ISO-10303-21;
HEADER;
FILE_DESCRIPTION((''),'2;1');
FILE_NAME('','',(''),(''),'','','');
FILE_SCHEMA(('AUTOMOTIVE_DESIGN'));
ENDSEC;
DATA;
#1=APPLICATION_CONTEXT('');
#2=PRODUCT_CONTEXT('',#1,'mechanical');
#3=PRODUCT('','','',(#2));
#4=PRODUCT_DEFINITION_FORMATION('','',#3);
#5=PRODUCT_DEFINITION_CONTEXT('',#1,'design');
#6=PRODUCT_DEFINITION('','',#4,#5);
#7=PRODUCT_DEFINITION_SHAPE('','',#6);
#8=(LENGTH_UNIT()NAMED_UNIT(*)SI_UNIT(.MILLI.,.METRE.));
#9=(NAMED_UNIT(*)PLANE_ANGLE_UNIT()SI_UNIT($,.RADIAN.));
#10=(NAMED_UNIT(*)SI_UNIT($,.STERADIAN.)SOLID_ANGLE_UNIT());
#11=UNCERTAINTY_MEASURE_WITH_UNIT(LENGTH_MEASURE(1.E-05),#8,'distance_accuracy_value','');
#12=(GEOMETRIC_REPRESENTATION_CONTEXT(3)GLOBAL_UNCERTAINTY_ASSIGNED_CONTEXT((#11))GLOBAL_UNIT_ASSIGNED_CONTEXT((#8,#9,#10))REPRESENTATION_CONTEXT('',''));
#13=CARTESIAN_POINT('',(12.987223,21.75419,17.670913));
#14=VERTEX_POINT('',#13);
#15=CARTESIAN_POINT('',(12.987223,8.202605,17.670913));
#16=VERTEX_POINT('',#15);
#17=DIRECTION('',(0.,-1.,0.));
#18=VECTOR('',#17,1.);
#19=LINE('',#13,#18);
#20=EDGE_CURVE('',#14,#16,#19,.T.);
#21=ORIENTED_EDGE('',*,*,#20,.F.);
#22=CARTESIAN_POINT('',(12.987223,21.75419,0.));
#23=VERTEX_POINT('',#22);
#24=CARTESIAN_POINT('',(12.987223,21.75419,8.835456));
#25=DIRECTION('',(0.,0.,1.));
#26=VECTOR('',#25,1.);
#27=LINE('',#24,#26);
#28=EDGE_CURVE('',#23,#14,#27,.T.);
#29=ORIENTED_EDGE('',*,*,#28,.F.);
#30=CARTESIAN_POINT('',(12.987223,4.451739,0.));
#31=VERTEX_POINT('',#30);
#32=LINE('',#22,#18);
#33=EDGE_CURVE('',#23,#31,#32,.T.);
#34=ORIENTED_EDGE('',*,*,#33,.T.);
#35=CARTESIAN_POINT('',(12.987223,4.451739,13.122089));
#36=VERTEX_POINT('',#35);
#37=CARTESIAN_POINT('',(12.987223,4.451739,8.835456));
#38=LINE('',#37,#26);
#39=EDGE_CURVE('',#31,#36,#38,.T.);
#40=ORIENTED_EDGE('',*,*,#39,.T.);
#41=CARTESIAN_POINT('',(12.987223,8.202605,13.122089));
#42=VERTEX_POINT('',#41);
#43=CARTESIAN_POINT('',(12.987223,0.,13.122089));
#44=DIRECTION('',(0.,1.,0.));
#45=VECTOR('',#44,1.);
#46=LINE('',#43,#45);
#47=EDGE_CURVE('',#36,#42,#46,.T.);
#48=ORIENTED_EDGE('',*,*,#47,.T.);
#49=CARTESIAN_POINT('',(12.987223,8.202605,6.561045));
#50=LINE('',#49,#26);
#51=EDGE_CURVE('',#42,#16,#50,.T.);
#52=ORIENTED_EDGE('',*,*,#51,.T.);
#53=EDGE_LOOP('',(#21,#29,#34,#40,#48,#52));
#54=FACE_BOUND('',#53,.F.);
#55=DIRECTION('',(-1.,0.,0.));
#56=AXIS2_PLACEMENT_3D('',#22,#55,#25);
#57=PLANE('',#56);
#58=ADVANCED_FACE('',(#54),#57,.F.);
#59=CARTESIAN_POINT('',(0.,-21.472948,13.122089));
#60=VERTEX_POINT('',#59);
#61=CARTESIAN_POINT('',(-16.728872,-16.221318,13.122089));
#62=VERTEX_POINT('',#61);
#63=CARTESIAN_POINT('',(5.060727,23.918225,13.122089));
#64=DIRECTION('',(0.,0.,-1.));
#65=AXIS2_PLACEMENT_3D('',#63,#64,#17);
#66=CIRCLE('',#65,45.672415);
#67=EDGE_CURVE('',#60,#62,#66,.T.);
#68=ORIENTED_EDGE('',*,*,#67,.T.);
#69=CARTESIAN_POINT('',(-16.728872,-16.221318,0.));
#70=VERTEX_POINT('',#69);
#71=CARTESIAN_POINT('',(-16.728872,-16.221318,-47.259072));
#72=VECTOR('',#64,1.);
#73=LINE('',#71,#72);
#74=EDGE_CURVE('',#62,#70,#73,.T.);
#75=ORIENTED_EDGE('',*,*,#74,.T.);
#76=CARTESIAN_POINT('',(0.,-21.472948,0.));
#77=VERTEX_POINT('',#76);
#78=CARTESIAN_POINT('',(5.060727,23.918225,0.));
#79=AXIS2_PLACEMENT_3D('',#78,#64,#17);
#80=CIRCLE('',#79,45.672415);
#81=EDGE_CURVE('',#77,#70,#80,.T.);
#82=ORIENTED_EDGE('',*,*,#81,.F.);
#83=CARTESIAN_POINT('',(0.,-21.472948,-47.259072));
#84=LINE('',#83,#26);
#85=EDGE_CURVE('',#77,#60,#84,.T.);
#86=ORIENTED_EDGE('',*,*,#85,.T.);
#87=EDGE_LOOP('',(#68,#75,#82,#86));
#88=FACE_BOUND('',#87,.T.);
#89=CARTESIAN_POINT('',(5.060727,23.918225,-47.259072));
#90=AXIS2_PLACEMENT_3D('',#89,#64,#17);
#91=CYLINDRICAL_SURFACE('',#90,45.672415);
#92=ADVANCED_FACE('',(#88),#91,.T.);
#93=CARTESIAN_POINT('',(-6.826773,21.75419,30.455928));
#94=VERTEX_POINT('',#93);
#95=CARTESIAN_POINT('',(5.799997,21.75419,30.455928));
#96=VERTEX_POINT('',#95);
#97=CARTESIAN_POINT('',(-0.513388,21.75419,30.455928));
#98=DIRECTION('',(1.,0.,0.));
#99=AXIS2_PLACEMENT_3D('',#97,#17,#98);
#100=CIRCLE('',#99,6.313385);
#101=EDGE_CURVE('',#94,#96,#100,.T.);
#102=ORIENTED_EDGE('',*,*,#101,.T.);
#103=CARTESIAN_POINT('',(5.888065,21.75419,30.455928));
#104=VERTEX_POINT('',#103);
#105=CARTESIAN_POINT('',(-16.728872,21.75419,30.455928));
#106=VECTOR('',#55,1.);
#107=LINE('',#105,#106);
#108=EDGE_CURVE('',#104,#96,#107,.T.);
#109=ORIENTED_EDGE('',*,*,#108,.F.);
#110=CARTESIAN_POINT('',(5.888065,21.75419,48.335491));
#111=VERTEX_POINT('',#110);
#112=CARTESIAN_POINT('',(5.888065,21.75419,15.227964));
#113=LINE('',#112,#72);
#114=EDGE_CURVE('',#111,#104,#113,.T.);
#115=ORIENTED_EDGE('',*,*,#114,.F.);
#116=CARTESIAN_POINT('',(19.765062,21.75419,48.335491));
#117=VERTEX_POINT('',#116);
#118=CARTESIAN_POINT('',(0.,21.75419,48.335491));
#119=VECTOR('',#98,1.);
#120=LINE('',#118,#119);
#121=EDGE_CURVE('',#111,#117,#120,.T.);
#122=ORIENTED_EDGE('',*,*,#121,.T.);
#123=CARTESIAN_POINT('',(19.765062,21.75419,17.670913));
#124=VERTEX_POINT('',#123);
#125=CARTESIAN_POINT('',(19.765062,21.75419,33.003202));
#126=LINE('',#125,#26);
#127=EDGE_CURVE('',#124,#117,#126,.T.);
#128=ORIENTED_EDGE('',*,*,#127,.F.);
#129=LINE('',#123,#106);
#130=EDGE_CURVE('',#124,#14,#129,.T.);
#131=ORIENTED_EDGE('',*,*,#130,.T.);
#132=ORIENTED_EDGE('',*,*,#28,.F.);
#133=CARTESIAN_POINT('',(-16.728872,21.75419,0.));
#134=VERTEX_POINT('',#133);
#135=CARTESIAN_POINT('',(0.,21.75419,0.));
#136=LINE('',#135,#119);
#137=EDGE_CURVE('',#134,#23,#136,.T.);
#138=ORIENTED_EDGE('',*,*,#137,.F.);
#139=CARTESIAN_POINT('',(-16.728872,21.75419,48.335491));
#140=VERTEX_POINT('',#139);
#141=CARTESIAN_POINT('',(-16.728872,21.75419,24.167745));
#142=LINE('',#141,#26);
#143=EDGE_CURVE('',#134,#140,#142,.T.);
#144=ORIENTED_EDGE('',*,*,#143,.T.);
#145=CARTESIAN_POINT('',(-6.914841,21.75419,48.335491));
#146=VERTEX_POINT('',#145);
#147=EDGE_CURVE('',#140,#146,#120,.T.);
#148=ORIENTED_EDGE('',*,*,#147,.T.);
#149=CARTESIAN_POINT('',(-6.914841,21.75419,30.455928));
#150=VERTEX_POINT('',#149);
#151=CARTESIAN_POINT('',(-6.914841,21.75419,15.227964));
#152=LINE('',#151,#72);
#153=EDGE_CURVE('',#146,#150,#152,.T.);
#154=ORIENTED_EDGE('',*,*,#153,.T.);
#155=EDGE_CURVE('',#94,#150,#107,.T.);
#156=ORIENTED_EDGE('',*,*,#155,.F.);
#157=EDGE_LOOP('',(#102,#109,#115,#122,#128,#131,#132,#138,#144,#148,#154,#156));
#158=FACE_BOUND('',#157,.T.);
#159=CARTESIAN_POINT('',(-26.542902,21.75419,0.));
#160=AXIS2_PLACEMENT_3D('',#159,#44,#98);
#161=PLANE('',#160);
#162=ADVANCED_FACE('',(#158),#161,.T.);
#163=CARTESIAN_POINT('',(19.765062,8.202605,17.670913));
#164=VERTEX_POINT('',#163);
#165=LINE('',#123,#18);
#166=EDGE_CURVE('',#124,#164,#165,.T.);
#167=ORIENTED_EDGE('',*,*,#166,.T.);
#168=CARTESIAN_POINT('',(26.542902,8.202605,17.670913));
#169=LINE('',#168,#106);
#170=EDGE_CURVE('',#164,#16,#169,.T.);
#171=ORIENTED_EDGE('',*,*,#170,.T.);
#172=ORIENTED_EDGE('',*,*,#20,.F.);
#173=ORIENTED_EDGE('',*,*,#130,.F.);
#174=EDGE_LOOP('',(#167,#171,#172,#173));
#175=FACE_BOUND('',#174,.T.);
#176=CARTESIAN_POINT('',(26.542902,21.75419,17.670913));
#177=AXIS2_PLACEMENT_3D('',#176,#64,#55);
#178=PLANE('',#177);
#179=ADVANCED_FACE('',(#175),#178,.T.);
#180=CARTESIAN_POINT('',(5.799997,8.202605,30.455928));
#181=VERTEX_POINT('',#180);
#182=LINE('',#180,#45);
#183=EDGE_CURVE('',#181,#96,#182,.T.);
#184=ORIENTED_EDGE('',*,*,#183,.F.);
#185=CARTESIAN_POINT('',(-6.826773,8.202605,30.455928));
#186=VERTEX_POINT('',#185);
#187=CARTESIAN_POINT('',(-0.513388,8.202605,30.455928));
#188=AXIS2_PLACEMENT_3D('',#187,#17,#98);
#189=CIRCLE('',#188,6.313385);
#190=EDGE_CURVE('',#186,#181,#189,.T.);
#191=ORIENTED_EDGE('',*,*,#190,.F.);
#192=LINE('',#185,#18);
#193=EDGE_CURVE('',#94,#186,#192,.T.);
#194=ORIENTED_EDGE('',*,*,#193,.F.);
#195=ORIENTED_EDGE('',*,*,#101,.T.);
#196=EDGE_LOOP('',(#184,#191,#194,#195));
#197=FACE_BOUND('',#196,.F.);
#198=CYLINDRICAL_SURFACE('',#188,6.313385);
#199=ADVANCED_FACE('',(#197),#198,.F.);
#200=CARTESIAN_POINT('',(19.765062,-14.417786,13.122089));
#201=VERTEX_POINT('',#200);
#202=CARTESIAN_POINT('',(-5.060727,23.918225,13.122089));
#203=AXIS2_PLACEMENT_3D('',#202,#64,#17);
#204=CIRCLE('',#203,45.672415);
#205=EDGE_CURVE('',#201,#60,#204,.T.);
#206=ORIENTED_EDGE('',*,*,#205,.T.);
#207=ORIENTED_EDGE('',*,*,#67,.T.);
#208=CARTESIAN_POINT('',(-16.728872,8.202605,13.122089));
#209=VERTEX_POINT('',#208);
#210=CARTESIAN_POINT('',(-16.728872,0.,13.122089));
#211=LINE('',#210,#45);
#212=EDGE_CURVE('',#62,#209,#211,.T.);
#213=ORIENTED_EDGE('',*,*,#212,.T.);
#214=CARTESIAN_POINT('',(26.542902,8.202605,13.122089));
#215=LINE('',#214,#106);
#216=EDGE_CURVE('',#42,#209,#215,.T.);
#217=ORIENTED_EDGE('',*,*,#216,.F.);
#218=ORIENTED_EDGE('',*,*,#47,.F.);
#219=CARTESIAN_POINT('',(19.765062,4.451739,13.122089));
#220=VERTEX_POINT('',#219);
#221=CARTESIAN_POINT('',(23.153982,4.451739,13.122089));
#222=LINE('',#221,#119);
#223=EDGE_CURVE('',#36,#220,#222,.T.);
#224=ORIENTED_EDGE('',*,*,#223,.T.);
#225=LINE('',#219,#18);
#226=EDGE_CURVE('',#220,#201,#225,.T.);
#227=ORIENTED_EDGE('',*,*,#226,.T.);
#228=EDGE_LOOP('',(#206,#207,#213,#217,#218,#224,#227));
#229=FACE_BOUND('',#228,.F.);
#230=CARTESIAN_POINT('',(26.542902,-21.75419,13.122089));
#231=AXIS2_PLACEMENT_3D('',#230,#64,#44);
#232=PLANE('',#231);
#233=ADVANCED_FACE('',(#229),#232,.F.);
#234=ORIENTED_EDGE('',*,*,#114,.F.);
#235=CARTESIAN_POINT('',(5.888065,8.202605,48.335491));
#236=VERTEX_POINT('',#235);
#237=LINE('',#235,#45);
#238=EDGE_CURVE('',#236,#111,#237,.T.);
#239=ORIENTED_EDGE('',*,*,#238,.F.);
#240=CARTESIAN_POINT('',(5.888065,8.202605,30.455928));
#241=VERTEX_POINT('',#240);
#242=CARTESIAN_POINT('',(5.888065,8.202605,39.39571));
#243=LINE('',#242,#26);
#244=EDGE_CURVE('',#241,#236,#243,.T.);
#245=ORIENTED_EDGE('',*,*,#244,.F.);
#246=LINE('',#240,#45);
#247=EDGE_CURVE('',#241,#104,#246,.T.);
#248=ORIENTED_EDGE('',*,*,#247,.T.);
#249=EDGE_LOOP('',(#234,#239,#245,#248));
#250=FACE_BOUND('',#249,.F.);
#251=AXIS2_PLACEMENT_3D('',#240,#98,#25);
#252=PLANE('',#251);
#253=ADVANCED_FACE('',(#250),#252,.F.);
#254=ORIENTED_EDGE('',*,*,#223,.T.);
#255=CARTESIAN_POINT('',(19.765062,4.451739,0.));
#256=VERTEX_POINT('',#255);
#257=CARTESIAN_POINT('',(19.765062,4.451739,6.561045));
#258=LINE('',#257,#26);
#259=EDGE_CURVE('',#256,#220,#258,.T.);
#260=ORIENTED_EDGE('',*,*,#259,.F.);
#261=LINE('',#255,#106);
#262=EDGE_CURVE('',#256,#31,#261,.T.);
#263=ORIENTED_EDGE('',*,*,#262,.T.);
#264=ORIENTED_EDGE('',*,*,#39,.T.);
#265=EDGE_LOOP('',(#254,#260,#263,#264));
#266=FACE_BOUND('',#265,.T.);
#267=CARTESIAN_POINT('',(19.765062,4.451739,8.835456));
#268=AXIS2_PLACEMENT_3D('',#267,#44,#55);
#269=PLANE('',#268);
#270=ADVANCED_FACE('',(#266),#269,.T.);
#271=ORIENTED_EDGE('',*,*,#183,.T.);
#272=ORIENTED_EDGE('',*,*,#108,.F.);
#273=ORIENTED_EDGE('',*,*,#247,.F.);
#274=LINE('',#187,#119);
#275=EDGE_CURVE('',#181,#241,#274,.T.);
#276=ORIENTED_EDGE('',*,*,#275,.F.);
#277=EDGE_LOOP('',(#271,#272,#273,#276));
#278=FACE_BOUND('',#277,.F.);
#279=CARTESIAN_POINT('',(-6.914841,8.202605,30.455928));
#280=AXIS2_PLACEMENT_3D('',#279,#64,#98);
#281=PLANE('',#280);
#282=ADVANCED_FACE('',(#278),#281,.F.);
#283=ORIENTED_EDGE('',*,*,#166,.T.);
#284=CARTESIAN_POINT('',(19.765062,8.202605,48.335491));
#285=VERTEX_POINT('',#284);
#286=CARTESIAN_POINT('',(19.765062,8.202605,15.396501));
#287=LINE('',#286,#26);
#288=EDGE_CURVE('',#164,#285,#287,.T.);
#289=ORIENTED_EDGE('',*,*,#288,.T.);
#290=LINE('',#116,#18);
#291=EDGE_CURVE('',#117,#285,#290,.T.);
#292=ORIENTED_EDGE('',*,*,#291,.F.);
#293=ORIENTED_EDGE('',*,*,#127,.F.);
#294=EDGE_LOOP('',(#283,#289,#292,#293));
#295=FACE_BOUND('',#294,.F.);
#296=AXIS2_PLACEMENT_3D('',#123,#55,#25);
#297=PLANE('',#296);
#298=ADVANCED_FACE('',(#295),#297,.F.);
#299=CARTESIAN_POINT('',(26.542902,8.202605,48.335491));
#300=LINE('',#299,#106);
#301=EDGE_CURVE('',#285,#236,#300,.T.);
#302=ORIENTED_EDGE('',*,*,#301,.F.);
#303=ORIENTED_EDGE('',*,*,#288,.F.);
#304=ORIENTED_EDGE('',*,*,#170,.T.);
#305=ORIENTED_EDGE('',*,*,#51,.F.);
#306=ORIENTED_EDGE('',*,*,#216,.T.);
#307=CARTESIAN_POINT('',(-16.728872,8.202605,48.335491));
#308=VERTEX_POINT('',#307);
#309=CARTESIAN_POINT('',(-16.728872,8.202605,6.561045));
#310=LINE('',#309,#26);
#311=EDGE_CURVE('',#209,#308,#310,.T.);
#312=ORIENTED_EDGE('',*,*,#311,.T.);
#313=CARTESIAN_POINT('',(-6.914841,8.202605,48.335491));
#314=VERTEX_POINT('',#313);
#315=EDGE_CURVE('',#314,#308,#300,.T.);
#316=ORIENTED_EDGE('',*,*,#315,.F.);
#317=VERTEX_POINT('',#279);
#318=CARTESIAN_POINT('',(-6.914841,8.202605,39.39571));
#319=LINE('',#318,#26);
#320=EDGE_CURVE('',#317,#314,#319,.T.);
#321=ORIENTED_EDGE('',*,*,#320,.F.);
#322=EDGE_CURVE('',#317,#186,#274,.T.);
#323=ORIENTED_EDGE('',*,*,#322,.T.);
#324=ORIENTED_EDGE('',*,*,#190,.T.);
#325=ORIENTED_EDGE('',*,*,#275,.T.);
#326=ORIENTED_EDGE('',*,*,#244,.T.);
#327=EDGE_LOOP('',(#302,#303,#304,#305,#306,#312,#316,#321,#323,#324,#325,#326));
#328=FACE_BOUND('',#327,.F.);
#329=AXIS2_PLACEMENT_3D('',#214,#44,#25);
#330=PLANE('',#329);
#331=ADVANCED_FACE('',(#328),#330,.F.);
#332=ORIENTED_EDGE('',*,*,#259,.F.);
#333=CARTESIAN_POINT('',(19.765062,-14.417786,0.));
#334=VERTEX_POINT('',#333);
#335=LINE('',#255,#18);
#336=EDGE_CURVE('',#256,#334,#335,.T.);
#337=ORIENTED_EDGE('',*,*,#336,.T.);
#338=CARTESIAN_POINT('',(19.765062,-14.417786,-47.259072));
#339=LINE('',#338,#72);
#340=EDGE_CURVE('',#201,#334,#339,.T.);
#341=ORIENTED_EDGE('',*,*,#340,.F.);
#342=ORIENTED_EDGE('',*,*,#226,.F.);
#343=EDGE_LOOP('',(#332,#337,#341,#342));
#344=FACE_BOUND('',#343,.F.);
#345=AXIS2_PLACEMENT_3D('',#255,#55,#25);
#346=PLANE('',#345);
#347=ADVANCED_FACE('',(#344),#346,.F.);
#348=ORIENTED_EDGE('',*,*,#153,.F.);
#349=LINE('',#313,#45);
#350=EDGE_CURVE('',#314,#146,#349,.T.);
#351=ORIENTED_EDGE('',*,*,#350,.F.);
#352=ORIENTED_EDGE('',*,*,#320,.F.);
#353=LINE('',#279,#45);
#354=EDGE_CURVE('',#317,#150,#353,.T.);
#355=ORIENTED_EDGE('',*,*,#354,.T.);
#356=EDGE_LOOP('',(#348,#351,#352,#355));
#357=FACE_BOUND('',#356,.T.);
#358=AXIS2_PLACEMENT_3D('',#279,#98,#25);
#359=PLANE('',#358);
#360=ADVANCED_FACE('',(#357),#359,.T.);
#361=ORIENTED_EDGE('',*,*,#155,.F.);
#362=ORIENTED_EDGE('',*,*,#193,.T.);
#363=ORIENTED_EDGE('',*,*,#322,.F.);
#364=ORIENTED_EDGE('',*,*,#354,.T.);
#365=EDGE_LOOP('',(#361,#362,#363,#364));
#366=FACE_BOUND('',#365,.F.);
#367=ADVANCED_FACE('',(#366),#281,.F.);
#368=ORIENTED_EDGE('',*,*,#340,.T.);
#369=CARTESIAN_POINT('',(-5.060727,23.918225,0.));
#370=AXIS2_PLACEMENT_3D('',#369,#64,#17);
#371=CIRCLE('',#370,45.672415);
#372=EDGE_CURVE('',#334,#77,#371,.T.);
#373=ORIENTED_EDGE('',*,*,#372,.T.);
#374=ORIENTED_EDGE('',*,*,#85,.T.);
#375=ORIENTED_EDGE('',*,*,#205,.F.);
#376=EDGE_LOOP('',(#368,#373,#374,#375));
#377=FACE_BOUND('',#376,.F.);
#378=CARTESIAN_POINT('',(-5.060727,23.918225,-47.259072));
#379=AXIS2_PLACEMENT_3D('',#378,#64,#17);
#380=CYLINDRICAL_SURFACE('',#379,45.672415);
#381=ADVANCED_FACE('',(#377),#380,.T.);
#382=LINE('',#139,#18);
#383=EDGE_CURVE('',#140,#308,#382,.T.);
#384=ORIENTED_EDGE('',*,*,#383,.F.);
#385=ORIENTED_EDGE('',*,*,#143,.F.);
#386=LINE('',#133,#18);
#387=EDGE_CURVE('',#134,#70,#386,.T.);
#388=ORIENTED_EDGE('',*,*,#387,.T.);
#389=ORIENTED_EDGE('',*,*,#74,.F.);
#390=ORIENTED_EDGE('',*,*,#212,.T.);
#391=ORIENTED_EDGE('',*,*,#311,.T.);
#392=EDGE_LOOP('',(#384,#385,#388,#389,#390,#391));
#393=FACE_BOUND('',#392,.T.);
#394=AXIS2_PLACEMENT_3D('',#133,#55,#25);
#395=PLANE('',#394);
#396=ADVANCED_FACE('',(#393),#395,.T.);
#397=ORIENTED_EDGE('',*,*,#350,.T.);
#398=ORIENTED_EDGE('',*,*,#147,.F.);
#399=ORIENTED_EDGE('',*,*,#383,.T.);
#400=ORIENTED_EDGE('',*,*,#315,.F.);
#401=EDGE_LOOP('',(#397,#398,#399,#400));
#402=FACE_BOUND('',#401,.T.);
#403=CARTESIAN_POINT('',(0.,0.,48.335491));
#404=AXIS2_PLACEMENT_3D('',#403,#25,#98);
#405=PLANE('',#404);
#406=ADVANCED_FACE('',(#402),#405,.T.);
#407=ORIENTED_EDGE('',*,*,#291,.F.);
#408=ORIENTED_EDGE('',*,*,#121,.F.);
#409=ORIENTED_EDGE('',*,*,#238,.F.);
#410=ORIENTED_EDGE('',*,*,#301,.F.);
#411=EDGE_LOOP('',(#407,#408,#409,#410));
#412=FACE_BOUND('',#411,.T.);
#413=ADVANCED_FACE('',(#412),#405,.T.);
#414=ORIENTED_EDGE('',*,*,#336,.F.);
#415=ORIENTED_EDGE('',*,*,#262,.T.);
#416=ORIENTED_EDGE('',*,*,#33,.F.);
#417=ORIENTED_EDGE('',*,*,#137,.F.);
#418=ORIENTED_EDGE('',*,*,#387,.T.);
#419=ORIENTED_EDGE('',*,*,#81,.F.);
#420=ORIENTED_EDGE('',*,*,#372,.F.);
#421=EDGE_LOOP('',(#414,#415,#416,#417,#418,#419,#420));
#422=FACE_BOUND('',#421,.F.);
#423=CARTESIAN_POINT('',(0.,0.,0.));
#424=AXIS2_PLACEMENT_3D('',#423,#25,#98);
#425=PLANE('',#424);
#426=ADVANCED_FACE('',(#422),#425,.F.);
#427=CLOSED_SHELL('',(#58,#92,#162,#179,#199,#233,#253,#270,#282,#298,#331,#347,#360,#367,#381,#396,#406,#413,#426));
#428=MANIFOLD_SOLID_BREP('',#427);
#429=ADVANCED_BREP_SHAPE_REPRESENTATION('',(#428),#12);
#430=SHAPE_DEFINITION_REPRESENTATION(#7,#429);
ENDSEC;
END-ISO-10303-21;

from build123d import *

# Parameters (mm, degrees)
F0_W         = 53.0858039856
F0_H         = 43.5083806515
F1_DEPTH     = 48.3354907483
F2_W         = 29.9567952752
F2_H         = 35.2134015411
F3_DEPTH     = 53.0868039856
F11_W        = 12.8029063344
F11_H        = 17.8795624524
F12_DEPTH    = 13.5525853763
F13_R        = 6.3133849469
F4_DEPTH     = 13.5525853763
F5_SIZE      = 12.7
F14_T1_DEPTH = 107.6402324205
F6_W         = 13.5556794703
F6_H         = 17.6709126681
F15_DEPTH    = 17.3024511896
F7_W         = 6.7778397352
F7_H         = 30.6645780802
F7_W_2       = 9.8140304908
F7_H_2       = 48.3354907483
F8_DEPTH     = 43.2281381166
F9_W         = 6.7778397352
F9_H         = 13.1220892072
F10_DEPTH    = 25.925686927


# Not quite as in the source:
# - a fillet or chamfer that OpenCascade refuses, or shapes differently, is made with other operations: its cross-section is extruded or revolved along the edge and cut away or added


with BuildPart() as f1:
    # F0 (on Top) → F1 (new body)
    with BuildSketch(Plane.XY):
        Rectangle(F0_W, F0_H)
    extrude(amount=F1_DEPTH)

    # F2 (on face) → F3 (cut, through all)
    with BuildSketch(Plane.YZ.offset(26.5429019928)):
        with Locations((-6.7757926881, 30.7287899777)):
            Rectangle(F2_W, F2_H)
    extrude(amount=-F3_DEPTH, mode=Mode.SUBTRACT)

    # F11 (on face) → F12 (cut, through all)
    with BuildSketch(Plane.XZ.offset(-8.2026049495)):
        with Locations((-0.513387844, 39.3957095221)):
            Rectangle(F11_W, F11_H)
    extrude(amount=-F12_DEPTH, mode=Mode.SUBTRACT)

    # F13 (on face) → F4 (cut, through all)
    with BuildSketch(Plane.XZ.offset(-8.2026049495)):
        with Locations((-0.513387844, 30.4559282959)):
            Circle(F13_R)
    extrude(amount=-F4_DEPTH, mode=Mode.SUBTRACT)

    # F5
    f5_edges = [f1.edges().sort_by_distance(p)[0] for p in [
        (26.542902, -21.75419, 6.561045),
        (-26.542902, -21.75419, 6.561045),
    ]]
    chamfer(f5_edges, length=F5_SIZE)

    # F14: fillet of radius 45.6724150938 on 2 edges, made by hand

    # F14_s2 → F14_t1 (cut)
    with BuildSketch(Plane.XY.offset(-47.2590716067)):
        with BuildLine():
            ThreePointArc((5.0607266499, -21.7541903257), (-11.9692421066, -18.4604215607), (-26.5429019928, -9.0541903257))
            Line((-26.5429019928, -9.0541903257), (-13.8429019928, -21.7541903257))
            Line((-13.8429019928, -21.7541903257), (5.0607266499, -21.7541903257))
        make_face()
        with BuildLine():
            ThreePointArc((-5.0607266499, -21.7541903257), (11.9692421066, -18.4604215607), (26.5429019928, -9.0541903257))
            Line((26.5429019928, -9.0541903257), (13.8429019928, -21.7541903257))
            Line((13.8429019928, -21.7541903257), (-5.0607266499, -21.7541903257))
        make_face()
    extrude(amount=F14_T1_DEPTH, mode=Mode.SUBTRACT)

    # F6 (on face) → F15 (cut)
    with BuildSketch(Plane(origin=(0, 21.7541903257, 0), x_dir=(-1, 0, 0), z_dir=(0, 1, 0))):
        with Locations((-19.7650622576, 8.8354563341)):
            Rectangle(F6_W, F6_H)
    extrude(amount=-F15_DEPTH, mode=Mode.SUBTRACT)

    # F7 (on face) → F8 (cut, through all)
    with BuildSketch(Plane(origin=(0, 21.7541903257, 0), x_dir=(-1, 0, 0), z_dir=(0, 1, 0))):
        with Locations((-23.1539821252, 33.0032017082)):
            Rectangle(F7_W, F7_H)
        with Locations((21.6358867474, 24.1677453741)):
            Rectangle(F7_W_2, F7_H_2)
    extrude(amount=-F8_DEPTH, mode=Mode.SUBTRACT)

    # F9 (on face) → F10 (cut, through all)
    with BuildSketch(Plane(origin=(0, 4.4517391361, 0), x_dir=(-1, 0, 0), z_dir=(0, 1, 0))):
        with Locations((-23.1539821252, 6.5610446036)):
            Rectangle(F9_W, F9_H)
    extrude(amount=-F10_DEPTH, mode=Mode.SUBTRACT)


solid = f1.part
